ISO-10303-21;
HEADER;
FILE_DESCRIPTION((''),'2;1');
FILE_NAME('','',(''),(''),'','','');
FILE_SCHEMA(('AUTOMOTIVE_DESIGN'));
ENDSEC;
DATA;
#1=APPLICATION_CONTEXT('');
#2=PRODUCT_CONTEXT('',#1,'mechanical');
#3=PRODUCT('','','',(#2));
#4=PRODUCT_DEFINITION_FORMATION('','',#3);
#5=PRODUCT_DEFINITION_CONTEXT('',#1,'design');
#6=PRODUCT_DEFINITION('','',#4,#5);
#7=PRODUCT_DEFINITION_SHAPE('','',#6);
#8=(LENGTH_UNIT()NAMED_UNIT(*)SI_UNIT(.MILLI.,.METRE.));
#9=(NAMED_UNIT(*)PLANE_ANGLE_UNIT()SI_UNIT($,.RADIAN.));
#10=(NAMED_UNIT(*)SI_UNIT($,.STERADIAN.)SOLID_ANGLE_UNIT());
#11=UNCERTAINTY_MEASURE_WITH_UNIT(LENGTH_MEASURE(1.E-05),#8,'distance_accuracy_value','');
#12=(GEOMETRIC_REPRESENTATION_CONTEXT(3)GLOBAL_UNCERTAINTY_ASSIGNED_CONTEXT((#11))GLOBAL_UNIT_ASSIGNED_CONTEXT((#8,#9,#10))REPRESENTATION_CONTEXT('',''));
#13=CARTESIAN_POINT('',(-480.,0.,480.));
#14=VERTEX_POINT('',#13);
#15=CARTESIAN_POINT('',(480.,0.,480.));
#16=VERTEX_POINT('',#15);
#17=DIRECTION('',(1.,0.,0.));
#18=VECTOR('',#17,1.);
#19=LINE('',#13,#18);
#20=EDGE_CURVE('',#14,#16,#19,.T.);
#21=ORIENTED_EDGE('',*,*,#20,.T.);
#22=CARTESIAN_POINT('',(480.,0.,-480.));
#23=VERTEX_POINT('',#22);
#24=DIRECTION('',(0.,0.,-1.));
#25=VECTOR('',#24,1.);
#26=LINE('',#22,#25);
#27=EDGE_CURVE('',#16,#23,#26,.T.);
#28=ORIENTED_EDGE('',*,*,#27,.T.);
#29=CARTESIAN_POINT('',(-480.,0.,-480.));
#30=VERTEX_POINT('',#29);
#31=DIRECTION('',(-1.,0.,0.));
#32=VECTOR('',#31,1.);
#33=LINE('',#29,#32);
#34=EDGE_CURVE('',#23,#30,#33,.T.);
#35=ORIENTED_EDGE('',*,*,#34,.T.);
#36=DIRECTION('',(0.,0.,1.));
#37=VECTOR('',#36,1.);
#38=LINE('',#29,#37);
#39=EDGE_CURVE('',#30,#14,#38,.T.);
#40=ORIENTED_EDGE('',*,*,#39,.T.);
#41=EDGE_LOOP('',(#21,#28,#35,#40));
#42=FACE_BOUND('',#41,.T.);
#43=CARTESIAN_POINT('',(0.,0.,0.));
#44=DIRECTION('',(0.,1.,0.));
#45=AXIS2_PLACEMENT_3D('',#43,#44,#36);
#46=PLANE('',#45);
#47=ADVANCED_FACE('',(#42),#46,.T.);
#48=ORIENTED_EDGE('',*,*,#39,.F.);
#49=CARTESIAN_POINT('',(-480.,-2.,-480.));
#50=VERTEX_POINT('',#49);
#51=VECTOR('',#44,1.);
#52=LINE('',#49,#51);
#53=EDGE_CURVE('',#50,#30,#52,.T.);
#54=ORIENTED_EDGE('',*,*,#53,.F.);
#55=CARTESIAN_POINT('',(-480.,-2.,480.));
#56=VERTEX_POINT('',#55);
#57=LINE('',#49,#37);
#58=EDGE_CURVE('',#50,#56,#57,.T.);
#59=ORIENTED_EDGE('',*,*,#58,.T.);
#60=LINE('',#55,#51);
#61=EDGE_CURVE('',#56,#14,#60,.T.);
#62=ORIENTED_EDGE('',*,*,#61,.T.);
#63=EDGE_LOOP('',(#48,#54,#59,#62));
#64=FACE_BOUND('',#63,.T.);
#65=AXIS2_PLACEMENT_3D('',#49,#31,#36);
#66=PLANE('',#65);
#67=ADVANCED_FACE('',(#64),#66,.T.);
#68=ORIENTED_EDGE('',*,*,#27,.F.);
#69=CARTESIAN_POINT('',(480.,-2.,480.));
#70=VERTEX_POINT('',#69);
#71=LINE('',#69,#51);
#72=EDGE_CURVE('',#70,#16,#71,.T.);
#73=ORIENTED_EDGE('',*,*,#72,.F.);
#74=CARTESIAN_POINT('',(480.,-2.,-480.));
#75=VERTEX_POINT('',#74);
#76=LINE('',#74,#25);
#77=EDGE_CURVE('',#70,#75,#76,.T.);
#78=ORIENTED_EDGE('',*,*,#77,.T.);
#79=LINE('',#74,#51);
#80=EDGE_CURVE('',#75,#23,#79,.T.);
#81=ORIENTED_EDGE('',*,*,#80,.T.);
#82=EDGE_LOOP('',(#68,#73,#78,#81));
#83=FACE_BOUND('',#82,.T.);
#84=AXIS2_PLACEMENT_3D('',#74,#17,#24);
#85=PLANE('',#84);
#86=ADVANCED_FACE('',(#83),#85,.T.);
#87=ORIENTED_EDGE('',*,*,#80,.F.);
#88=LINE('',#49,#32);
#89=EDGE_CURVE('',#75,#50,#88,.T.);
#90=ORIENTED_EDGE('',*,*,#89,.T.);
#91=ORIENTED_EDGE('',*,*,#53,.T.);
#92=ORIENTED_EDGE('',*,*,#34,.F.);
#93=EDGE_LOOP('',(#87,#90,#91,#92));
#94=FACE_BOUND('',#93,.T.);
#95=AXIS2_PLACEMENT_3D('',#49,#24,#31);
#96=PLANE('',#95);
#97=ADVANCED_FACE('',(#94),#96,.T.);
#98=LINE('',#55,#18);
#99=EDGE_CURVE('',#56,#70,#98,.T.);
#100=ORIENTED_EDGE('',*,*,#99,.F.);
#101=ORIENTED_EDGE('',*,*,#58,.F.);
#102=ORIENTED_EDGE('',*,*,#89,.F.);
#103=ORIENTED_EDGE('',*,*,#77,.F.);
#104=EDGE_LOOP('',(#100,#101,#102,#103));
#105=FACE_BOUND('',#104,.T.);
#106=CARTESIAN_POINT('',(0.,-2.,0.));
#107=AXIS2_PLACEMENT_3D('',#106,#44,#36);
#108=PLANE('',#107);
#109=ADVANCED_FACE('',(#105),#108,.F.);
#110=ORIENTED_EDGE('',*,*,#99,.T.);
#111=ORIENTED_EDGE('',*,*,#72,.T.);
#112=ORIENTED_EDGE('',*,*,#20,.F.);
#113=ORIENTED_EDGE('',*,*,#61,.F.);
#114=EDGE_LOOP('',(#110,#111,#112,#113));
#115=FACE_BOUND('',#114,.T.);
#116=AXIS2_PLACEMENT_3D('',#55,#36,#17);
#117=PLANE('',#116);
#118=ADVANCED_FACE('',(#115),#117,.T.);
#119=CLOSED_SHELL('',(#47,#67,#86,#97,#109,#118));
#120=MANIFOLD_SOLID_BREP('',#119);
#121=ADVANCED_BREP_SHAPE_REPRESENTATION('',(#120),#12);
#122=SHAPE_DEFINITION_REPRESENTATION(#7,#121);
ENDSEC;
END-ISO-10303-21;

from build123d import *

# Parameters (mm, degrees)
SKETCH_1_W             = 960
SKETCH_1_H             = 960
SM_BASE_FLANGE_1_DEPTH = 2


# Sheet-metal steps are written as plain solids
with BuildPart() as part:
    # 基体-法兰1: sheet metal written as solids
    # Sketch 1 → 基体-法兰1 (new body)
    with BuildSketch(Plane(origin=(0, 0, 0), x_dir=(1, 0, 0), z_dir=(0, 1, 0))):
        Rectangle(SKETCH_1_W, SKETCH_1_H)
    extrude(amount=-SM_BASE_FLANGE_1_DEPTH)


solid = part.part
